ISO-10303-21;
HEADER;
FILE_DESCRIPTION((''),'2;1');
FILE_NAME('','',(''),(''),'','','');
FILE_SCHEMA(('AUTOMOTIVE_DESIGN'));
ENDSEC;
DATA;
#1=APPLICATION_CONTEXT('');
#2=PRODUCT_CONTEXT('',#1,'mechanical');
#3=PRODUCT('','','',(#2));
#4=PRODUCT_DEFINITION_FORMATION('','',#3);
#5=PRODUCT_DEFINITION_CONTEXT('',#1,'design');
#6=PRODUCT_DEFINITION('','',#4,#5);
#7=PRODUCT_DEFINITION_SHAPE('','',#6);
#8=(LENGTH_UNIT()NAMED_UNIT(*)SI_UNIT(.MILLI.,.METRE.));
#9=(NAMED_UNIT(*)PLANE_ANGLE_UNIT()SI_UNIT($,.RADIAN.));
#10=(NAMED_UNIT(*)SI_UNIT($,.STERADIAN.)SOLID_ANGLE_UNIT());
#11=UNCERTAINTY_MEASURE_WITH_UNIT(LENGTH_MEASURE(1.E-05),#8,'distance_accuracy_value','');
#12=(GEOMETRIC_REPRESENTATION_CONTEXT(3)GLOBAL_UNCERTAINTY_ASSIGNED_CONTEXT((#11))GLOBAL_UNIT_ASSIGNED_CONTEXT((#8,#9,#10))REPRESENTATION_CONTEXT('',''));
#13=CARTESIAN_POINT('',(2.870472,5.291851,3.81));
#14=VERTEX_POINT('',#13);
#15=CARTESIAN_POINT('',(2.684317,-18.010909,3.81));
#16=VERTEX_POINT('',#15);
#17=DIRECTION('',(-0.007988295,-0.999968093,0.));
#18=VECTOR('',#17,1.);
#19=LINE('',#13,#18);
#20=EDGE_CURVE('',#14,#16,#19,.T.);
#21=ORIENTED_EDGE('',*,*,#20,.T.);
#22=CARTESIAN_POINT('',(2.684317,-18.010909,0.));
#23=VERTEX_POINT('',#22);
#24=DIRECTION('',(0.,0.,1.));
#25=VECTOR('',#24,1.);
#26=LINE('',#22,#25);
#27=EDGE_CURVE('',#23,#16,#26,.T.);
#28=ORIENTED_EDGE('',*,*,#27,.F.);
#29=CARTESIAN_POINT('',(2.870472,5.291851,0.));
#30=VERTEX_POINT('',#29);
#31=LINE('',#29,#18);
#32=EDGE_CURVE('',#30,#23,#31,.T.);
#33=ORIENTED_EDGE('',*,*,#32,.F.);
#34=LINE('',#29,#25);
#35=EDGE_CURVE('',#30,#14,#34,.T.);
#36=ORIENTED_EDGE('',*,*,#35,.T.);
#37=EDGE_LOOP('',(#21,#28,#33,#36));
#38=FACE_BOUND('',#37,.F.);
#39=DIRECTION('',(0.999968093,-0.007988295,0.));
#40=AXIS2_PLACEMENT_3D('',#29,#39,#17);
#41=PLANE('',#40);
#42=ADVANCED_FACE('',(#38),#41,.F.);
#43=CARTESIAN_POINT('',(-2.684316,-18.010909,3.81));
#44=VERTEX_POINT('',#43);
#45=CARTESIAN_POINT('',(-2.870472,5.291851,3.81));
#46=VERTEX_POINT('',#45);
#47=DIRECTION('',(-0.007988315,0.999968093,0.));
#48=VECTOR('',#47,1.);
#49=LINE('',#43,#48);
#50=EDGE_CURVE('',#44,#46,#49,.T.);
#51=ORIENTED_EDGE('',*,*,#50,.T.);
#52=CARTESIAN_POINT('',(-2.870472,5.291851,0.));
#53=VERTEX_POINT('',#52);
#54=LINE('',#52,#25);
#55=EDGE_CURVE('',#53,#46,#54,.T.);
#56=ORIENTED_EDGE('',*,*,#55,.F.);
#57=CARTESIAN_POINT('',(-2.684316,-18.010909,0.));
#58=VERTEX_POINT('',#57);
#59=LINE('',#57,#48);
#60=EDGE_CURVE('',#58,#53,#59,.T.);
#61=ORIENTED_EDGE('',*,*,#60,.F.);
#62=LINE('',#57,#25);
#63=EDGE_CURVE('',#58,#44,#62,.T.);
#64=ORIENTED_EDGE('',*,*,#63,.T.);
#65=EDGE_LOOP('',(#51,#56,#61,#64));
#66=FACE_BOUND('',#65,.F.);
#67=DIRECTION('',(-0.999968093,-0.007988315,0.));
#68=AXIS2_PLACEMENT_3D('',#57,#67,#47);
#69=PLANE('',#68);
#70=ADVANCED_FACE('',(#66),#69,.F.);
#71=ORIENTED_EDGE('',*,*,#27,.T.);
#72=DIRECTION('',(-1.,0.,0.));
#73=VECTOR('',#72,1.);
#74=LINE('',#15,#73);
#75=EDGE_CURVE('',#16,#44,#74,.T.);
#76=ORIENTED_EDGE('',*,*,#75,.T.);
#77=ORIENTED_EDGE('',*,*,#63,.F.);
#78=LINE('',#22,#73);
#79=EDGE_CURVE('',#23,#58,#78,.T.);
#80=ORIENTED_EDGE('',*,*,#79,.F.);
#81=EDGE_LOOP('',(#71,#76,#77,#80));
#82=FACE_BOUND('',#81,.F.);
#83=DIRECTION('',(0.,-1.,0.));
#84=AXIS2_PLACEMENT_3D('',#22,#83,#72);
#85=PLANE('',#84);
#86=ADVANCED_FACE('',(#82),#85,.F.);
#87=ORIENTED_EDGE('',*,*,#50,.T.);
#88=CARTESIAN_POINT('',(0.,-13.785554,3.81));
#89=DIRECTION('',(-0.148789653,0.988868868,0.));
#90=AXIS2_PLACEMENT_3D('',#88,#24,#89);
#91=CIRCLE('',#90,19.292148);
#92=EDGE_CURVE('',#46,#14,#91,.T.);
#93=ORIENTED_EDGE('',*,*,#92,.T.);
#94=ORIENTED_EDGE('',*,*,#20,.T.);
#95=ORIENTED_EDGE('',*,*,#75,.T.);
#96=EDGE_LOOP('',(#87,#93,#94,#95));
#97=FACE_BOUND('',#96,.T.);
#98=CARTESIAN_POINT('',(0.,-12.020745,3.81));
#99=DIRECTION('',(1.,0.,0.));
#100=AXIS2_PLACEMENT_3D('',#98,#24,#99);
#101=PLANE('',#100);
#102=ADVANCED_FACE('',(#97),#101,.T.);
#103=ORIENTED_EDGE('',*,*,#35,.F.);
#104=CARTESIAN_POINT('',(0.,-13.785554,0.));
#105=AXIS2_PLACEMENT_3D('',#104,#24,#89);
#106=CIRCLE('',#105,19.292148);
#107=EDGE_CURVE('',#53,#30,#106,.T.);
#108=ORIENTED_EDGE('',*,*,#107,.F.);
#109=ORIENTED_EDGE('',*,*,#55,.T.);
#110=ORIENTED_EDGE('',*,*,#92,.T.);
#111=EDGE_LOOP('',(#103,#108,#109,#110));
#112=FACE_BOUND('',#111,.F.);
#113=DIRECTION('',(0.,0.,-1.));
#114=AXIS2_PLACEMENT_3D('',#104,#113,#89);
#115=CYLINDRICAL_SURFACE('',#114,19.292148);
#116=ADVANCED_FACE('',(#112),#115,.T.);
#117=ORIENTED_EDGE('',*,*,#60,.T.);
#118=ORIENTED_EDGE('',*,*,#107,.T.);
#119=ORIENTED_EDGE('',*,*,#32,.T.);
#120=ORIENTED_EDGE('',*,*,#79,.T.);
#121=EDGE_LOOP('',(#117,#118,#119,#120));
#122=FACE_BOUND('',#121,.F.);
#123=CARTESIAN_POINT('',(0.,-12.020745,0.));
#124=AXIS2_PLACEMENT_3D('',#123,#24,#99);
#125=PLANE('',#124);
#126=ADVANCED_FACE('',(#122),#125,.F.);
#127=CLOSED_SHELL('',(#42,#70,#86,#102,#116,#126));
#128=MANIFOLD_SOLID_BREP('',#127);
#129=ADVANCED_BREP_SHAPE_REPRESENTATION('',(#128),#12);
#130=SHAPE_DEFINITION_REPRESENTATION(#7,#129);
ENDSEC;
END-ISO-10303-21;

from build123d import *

# Parameters (mm, degrees)
F3_DEPTH = 3.81


# Not quite as in the source:
# - the program builds the solid bodies; features that only make, move or delete a surface that nothing else refers to are left out


with BuildPart() as f3:
    # F1 (on Top) → F3 (new body)
    with BuildSketch(Plane.XY):
        with BuildLine():
            Line((-2.684316365, -18.0109087378), (-2.870472083, 5.2918509166))
            ThreePointArc((-2.870472083, 5.2918509166), (0, -33.0777025508), (2.870472083, 5.2918509166))
            Line((2.870472083, 5.2918509166), (2.6843168307, -18.0109087378))
            Line((2.6843168307, -18.0109087378), (-2.684316365, -18.0109087378))
        make_face()
    extrude(amount=F3_DEPTH)


solid = f3.part
